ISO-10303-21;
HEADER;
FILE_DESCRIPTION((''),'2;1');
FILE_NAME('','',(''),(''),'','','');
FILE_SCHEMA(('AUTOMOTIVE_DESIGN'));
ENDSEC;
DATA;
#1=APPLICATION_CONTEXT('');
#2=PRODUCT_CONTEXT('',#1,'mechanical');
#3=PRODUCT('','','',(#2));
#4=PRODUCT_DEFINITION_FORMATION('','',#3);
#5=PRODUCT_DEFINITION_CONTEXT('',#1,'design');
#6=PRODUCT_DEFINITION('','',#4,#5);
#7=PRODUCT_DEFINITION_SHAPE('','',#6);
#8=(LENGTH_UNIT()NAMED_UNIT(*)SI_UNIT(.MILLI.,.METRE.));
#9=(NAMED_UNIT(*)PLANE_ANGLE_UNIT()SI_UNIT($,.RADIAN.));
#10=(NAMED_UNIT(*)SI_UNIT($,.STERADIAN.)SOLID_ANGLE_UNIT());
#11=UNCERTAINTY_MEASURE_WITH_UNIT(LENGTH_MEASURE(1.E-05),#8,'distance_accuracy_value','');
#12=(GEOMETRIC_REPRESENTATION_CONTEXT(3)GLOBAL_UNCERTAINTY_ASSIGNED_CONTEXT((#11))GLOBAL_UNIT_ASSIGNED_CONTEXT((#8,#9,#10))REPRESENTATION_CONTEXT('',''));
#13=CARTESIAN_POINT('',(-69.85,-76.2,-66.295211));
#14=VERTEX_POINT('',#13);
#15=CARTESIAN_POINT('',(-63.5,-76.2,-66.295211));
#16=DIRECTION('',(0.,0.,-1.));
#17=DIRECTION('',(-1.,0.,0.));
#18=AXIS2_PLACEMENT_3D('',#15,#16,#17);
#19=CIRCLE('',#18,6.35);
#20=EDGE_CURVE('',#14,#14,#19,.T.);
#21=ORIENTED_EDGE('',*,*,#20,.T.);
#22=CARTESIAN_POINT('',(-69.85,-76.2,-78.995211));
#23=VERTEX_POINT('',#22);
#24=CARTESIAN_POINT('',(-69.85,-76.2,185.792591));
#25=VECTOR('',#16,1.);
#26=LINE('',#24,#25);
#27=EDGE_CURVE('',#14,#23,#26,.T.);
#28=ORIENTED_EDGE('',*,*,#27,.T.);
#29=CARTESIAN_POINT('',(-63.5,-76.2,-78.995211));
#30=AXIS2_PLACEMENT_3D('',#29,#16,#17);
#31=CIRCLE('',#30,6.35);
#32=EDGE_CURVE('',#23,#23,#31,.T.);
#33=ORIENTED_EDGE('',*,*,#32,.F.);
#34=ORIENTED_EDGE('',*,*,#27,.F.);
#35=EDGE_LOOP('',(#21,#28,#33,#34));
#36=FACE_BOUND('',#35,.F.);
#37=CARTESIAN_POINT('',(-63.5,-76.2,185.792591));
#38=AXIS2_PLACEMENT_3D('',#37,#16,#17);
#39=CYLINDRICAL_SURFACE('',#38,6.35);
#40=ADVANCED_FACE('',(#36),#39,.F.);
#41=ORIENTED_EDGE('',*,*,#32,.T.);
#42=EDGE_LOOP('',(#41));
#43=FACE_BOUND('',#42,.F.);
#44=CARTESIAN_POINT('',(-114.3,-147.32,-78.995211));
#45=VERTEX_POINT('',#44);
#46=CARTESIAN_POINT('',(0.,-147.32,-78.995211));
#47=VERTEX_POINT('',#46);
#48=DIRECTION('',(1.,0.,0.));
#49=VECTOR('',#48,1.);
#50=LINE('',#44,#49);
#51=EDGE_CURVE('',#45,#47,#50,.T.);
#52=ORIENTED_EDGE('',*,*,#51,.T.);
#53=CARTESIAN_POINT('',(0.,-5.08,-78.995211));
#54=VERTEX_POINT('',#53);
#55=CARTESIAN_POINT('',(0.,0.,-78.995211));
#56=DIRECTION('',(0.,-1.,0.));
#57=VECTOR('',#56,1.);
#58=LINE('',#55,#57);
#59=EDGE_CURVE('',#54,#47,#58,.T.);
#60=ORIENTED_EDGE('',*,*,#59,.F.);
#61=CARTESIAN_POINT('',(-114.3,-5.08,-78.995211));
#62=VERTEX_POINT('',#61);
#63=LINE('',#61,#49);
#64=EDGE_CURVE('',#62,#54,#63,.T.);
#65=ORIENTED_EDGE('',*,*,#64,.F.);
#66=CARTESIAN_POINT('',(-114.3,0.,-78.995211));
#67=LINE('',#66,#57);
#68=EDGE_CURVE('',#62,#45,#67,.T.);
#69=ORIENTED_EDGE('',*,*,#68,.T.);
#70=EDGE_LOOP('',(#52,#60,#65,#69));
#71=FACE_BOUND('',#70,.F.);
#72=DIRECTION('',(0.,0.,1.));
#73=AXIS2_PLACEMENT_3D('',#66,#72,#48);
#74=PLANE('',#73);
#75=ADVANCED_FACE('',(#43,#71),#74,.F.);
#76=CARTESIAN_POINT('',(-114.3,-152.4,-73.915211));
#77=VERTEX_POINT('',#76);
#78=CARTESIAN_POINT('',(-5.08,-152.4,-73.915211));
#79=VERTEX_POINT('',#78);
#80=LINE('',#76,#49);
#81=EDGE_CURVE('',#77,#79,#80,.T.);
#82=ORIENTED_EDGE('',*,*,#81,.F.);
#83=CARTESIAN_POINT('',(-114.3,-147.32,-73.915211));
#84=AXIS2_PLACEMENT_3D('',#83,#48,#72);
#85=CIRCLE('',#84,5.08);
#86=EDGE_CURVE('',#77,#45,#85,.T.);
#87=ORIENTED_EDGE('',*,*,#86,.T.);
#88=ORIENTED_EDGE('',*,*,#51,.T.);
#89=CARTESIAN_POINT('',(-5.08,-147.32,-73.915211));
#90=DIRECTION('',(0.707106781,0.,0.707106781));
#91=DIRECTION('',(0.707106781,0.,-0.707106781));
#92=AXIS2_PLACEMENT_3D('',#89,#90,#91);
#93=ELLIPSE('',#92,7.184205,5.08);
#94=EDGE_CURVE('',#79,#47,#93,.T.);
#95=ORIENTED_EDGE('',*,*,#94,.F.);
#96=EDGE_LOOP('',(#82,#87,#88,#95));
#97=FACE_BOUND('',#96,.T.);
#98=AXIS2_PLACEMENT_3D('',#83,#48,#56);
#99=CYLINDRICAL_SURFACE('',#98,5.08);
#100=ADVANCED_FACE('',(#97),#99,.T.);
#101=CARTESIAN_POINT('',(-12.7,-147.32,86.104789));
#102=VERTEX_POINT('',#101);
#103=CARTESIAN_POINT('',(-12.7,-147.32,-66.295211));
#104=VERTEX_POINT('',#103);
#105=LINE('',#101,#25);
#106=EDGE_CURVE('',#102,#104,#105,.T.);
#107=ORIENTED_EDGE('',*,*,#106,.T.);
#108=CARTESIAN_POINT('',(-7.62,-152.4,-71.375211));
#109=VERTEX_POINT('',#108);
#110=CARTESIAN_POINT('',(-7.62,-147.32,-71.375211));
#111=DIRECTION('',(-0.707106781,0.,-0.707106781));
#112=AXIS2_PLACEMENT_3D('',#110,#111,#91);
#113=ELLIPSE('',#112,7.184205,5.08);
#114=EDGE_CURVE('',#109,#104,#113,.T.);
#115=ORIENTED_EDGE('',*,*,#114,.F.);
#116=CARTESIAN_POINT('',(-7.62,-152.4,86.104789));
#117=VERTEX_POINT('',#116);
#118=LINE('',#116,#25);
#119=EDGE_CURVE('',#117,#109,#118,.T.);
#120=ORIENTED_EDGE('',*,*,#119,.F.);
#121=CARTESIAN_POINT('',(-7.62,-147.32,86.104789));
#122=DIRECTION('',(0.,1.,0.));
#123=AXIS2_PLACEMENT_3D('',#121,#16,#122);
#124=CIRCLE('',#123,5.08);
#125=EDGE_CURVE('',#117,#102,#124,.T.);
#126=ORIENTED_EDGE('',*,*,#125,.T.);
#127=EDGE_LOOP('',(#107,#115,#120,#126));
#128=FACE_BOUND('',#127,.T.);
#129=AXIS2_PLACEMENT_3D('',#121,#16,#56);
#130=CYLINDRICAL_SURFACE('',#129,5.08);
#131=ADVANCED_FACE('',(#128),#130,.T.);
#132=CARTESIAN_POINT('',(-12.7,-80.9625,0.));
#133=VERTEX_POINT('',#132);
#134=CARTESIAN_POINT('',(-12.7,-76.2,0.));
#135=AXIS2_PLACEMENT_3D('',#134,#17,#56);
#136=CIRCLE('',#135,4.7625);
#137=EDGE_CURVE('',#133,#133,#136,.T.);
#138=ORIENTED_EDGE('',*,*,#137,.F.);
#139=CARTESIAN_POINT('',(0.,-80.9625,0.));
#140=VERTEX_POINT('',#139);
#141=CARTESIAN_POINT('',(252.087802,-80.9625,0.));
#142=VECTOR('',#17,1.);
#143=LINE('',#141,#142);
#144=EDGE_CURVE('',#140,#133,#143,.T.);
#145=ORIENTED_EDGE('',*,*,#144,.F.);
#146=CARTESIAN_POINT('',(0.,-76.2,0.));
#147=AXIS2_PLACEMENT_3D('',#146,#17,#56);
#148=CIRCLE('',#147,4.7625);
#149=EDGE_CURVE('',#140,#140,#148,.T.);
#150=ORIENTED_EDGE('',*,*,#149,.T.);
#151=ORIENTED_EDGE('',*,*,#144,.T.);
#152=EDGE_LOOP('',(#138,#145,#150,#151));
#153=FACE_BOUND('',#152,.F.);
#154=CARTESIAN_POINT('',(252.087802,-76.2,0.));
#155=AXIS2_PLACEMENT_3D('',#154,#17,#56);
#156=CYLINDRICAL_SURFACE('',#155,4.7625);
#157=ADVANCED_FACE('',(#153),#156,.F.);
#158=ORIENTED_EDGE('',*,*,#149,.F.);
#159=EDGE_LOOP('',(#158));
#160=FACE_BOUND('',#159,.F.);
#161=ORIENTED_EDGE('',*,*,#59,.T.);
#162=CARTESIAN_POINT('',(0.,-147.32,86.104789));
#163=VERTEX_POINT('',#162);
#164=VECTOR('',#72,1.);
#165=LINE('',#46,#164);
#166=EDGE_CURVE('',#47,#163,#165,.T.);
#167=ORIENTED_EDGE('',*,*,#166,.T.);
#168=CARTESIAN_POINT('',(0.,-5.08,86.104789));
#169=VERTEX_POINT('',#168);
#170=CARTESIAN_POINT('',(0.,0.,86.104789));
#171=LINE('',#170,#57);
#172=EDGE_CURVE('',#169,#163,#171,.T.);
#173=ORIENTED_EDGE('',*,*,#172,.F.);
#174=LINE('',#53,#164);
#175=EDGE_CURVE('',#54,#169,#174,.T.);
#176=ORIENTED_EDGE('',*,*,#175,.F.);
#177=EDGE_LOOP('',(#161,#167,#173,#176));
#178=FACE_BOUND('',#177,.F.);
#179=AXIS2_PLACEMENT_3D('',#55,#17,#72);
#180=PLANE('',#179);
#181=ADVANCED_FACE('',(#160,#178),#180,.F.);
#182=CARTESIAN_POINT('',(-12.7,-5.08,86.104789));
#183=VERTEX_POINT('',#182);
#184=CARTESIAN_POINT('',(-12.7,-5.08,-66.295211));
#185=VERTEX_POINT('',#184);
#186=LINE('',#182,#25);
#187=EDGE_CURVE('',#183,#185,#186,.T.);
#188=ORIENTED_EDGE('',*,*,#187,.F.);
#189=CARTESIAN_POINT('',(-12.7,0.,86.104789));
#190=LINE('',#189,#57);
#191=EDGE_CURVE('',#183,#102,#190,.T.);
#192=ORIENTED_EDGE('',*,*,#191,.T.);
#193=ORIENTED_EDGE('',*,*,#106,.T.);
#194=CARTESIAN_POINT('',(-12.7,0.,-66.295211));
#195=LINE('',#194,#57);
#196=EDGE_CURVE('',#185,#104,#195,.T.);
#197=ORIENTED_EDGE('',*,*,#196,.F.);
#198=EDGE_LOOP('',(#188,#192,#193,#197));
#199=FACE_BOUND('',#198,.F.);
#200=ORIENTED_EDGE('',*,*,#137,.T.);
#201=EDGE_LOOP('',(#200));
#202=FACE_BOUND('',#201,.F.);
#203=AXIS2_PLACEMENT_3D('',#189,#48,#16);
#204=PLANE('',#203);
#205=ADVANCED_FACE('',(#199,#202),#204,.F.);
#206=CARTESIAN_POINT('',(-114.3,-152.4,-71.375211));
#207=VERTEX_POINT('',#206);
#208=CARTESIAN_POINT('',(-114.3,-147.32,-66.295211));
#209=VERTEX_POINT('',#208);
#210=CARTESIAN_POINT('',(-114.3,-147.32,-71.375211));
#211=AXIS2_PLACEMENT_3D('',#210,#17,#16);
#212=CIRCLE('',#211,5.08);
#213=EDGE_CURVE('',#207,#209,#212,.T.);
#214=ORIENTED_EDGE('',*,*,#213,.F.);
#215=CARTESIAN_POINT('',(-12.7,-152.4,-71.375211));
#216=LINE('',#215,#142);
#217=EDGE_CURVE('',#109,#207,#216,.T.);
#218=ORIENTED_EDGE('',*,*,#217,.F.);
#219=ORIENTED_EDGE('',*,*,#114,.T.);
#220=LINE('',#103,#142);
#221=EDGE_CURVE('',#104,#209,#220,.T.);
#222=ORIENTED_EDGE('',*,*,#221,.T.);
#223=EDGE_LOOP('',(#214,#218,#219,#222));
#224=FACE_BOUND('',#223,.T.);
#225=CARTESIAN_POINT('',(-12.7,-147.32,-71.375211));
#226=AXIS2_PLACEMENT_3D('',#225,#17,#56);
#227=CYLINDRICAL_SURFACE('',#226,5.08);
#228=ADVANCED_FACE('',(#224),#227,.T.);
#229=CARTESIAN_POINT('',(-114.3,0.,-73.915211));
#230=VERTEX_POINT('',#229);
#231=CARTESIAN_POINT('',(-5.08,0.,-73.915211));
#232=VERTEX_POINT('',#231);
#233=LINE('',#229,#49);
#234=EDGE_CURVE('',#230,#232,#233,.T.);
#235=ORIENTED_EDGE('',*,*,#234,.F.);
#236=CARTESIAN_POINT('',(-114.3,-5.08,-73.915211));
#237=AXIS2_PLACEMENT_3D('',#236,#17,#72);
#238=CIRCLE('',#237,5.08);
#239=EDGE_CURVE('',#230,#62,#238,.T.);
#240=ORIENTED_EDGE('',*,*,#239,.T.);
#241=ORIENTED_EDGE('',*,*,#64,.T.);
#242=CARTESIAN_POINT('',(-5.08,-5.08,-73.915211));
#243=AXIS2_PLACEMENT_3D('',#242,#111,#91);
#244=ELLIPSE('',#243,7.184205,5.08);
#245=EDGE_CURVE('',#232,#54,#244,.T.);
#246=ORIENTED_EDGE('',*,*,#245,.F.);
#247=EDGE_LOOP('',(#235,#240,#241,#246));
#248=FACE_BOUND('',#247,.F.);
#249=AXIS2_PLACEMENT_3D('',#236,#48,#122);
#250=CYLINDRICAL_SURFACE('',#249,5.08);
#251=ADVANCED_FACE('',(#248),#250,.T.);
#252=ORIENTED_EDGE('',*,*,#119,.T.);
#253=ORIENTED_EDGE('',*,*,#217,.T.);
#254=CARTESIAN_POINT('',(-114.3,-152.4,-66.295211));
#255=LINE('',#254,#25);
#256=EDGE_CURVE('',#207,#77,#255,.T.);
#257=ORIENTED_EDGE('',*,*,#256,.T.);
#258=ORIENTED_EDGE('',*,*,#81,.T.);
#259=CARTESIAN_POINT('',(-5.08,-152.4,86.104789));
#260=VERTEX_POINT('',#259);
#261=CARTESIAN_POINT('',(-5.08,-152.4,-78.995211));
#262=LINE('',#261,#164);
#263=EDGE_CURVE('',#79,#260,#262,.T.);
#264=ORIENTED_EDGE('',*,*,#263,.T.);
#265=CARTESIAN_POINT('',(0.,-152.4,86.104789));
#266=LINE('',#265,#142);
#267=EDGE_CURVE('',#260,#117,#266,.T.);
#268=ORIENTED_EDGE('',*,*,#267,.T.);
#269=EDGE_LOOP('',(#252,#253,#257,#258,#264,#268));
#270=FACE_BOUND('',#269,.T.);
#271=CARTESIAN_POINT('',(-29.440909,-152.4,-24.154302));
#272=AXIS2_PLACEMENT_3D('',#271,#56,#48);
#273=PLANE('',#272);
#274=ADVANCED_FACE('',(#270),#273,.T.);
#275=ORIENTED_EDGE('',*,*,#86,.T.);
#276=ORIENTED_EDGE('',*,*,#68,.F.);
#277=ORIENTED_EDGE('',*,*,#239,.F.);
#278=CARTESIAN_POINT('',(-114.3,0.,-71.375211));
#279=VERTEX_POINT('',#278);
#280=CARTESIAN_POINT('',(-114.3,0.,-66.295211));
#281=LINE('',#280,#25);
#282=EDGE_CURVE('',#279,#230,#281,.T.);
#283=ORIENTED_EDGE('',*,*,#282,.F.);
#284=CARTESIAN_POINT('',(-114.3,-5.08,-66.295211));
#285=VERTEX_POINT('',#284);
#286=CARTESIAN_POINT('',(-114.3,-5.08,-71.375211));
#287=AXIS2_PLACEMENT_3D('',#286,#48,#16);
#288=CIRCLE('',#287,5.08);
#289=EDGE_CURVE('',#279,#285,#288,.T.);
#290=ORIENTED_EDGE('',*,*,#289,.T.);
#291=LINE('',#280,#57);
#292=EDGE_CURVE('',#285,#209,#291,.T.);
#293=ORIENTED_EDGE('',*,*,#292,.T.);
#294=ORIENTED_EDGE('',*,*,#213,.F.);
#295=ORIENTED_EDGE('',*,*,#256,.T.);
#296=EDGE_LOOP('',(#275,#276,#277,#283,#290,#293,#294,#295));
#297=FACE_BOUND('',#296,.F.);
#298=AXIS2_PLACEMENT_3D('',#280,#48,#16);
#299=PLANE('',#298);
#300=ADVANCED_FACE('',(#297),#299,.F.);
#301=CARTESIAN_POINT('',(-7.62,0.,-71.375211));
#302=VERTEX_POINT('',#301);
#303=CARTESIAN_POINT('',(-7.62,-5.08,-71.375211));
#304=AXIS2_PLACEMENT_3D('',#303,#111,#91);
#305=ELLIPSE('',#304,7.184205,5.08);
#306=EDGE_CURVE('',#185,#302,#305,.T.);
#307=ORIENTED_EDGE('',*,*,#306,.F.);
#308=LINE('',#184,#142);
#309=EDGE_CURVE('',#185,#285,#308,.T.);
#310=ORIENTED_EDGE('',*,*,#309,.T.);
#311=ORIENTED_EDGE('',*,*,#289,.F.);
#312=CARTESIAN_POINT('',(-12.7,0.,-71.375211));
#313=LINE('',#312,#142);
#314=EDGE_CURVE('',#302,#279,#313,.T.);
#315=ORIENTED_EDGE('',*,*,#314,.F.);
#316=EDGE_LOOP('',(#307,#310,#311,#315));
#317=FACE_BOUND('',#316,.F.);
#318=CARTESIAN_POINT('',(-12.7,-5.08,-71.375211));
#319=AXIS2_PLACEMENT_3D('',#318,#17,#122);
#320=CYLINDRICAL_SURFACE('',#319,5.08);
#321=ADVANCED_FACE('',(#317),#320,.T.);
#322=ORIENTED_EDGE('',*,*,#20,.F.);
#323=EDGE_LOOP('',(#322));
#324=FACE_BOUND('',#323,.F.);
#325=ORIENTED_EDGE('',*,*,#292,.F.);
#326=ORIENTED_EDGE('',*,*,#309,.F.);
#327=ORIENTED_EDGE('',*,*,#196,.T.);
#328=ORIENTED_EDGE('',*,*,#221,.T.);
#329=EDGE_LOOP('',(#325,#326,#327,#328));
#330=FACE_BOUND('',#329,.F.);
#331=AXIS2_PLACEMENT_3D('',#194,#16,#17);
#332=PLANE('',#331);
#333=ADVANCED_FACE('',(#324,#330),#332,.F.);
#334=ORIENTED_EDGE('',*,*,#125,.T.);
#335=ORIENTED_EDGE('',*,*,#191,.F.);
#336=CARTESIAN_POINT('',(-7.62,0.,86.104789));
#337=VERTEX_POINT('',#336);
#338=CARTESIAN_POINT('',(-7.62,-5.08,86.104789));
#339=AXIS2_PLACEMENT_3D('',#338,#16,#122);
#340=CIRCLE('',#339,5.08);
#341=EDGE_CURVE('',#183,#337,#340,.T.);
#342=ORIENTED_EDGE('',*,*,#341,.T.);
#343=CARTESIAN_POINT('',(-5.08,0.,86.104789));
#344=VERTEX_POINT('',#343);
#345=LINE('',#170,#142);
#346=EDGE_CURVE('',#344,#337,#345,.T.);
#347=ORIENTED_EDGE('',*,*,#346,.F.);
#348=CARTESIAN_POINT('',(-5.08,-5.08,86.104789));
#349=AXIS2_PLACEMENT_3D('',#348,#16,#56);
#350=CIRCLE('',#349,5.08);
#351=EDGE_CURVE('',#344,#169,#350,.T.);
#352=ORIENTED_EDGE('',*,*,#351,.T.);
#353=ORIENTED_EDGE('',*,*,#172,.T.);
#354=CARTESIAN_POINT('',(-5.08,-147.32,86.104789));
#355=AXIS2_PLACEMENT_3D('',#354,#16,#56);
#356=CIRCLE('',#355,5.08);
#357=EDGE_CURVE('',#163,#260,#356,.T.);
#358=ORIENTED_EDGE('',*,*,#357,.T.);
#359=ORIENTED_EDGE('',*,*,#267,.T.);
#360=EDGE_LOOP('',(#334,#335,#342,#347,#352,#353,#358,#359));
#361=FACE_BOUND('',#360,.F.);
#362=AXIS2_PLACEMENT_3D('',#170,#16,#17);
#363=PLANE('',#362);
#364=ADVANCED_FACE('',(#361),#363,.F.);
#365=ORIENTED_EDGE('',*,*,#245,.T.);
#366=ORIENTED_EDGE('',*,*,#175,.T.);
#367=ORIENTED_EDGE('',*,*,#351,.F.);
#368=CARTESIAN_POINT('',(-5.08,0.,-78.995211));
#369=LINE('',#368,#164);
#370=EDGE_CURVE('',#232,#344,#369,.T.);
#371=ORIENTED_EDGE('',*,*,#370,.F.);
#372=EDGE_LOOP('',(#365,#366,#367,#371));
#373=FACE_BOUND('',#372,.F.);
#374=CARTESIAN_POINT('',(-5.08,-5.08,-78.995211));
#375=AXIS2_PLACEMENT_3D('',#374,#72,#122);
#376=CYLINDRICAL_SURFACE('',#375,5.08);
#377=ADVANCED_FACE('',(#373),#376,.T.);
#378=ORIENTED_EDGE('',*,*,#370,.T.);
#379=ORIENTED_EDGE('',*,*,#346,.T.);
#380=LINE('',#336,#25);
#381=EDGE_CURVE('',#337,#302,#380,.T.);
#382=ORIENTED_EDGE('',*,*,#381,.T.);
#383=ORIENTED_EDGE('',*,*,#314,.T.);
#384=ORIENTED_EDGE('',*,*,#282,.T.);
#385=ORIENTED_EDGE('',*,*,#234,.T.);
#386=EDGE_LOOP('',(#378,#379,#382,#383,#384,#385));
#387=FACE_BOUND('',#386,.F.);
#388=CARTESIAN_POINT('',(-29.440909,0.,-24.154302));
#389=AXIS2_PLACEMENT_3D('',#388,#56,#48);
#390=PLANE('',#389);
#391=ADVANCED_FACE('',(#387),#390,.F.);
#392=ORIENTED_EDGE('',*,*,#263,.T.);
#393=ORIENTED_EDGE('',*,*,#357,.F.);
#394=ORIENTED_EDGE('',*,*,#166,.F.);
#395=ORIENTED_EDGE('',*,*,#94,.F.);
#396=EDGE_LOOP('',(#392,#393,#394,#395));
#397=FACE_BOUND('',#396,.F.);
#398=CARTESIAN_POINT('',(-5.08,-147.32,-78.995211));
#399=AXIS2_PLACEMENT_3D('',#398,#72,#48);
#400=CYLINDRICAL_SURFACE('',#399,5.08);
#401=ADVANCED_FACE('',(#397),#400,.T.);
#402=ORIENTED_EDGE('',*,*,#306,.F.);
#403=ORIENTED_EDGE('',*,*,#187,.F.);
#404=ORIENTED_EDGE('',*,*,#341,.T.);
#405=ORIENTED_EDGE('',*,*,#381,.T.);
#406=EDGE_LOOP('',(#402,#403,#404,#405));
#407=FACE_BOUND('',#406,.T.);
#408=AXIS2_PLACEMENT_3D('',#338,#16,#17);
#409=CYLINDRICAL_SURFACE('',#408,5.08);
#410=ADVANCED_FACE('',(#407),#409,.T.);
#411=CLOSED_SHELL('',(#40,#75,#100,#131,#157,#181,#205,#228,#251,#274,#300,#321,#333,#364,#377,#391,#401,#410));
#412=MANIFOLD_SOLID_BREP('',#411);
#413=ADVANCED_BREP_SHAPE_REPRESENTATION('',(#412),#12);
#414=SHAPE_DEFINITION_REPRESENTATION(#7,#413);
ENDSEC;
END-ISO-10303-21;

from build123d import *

# Parameters (mm, degrees)
F1_DEPTH = 152.4
F3_D     = 9.525
F5_D     = 12.7
F6_R     = 5.08
F7_R     = 5.08
F8_R     = 5.08
F9_R     = 5.08


# Not quite as in the source:
# - a length typed as a fraction of an inch, garbled in the dataset ("3 / 203.2 mm" for 3/8 in), is restored


with BuildPart() as f1:
    # F0 (on Front) → F1 (new body)
    with BuildSketch(Plane.XZ):
        Polygon((0, -78.9952108244), (0, 86.1047891756), (-12.7, 86.1047891756), (-12.7, -66.2952108244), (-114.3, -66.2952108244), (-114.3, -78.9952108244), align=None)
    extrude(amount=F1_DEPTH)

    # F3 (through all)
    with Locations(Plane.YZ):
        with Locations((-76.2, 0)):
            Hole(F3_D / 2)

    # F5 (through all)
    with Locations(Plane.XY.offset(-66.2952108244)):
        with Locations((-63.5, -76.2)):
            Hole(F5_D / 2)

    # F6
    f6_edges = [f1.edges().sort_by_distance(p)[0] for p in [
        (-12.7, -152.4, 9.904789),
        (-63.5, -152.4, -66.295211),
    ]]
    fillet(f6_edges, radius=F6_R)

    # F7
    f7_edges = [f1.edges().sort_by_distance(p)[0] for p in [
        (-12.7, 0, 9.904789),
        (-63.5, 0, -66.295211),
    ]]
    fillet(f7_edges, radius=F7_R)

    # F8
    f8_edges = [f1.edges().sort_by_distance(p)[0] for p in [
        (-57.15, 0, -78.995211),
        (0, 0, 3.554789),
    ]]
    fillet(f8_edges, radius=F8_R)

    # F9
    f9_edges = [f1.edges().sort_by_distance(p)[0] for p in [
        (-57.15, -152.4, -78.995211),
        (0, -152.4, 3.554789),
    ]]
    fillet(f9_edges, radius=F9_R)


solid = f1.part
